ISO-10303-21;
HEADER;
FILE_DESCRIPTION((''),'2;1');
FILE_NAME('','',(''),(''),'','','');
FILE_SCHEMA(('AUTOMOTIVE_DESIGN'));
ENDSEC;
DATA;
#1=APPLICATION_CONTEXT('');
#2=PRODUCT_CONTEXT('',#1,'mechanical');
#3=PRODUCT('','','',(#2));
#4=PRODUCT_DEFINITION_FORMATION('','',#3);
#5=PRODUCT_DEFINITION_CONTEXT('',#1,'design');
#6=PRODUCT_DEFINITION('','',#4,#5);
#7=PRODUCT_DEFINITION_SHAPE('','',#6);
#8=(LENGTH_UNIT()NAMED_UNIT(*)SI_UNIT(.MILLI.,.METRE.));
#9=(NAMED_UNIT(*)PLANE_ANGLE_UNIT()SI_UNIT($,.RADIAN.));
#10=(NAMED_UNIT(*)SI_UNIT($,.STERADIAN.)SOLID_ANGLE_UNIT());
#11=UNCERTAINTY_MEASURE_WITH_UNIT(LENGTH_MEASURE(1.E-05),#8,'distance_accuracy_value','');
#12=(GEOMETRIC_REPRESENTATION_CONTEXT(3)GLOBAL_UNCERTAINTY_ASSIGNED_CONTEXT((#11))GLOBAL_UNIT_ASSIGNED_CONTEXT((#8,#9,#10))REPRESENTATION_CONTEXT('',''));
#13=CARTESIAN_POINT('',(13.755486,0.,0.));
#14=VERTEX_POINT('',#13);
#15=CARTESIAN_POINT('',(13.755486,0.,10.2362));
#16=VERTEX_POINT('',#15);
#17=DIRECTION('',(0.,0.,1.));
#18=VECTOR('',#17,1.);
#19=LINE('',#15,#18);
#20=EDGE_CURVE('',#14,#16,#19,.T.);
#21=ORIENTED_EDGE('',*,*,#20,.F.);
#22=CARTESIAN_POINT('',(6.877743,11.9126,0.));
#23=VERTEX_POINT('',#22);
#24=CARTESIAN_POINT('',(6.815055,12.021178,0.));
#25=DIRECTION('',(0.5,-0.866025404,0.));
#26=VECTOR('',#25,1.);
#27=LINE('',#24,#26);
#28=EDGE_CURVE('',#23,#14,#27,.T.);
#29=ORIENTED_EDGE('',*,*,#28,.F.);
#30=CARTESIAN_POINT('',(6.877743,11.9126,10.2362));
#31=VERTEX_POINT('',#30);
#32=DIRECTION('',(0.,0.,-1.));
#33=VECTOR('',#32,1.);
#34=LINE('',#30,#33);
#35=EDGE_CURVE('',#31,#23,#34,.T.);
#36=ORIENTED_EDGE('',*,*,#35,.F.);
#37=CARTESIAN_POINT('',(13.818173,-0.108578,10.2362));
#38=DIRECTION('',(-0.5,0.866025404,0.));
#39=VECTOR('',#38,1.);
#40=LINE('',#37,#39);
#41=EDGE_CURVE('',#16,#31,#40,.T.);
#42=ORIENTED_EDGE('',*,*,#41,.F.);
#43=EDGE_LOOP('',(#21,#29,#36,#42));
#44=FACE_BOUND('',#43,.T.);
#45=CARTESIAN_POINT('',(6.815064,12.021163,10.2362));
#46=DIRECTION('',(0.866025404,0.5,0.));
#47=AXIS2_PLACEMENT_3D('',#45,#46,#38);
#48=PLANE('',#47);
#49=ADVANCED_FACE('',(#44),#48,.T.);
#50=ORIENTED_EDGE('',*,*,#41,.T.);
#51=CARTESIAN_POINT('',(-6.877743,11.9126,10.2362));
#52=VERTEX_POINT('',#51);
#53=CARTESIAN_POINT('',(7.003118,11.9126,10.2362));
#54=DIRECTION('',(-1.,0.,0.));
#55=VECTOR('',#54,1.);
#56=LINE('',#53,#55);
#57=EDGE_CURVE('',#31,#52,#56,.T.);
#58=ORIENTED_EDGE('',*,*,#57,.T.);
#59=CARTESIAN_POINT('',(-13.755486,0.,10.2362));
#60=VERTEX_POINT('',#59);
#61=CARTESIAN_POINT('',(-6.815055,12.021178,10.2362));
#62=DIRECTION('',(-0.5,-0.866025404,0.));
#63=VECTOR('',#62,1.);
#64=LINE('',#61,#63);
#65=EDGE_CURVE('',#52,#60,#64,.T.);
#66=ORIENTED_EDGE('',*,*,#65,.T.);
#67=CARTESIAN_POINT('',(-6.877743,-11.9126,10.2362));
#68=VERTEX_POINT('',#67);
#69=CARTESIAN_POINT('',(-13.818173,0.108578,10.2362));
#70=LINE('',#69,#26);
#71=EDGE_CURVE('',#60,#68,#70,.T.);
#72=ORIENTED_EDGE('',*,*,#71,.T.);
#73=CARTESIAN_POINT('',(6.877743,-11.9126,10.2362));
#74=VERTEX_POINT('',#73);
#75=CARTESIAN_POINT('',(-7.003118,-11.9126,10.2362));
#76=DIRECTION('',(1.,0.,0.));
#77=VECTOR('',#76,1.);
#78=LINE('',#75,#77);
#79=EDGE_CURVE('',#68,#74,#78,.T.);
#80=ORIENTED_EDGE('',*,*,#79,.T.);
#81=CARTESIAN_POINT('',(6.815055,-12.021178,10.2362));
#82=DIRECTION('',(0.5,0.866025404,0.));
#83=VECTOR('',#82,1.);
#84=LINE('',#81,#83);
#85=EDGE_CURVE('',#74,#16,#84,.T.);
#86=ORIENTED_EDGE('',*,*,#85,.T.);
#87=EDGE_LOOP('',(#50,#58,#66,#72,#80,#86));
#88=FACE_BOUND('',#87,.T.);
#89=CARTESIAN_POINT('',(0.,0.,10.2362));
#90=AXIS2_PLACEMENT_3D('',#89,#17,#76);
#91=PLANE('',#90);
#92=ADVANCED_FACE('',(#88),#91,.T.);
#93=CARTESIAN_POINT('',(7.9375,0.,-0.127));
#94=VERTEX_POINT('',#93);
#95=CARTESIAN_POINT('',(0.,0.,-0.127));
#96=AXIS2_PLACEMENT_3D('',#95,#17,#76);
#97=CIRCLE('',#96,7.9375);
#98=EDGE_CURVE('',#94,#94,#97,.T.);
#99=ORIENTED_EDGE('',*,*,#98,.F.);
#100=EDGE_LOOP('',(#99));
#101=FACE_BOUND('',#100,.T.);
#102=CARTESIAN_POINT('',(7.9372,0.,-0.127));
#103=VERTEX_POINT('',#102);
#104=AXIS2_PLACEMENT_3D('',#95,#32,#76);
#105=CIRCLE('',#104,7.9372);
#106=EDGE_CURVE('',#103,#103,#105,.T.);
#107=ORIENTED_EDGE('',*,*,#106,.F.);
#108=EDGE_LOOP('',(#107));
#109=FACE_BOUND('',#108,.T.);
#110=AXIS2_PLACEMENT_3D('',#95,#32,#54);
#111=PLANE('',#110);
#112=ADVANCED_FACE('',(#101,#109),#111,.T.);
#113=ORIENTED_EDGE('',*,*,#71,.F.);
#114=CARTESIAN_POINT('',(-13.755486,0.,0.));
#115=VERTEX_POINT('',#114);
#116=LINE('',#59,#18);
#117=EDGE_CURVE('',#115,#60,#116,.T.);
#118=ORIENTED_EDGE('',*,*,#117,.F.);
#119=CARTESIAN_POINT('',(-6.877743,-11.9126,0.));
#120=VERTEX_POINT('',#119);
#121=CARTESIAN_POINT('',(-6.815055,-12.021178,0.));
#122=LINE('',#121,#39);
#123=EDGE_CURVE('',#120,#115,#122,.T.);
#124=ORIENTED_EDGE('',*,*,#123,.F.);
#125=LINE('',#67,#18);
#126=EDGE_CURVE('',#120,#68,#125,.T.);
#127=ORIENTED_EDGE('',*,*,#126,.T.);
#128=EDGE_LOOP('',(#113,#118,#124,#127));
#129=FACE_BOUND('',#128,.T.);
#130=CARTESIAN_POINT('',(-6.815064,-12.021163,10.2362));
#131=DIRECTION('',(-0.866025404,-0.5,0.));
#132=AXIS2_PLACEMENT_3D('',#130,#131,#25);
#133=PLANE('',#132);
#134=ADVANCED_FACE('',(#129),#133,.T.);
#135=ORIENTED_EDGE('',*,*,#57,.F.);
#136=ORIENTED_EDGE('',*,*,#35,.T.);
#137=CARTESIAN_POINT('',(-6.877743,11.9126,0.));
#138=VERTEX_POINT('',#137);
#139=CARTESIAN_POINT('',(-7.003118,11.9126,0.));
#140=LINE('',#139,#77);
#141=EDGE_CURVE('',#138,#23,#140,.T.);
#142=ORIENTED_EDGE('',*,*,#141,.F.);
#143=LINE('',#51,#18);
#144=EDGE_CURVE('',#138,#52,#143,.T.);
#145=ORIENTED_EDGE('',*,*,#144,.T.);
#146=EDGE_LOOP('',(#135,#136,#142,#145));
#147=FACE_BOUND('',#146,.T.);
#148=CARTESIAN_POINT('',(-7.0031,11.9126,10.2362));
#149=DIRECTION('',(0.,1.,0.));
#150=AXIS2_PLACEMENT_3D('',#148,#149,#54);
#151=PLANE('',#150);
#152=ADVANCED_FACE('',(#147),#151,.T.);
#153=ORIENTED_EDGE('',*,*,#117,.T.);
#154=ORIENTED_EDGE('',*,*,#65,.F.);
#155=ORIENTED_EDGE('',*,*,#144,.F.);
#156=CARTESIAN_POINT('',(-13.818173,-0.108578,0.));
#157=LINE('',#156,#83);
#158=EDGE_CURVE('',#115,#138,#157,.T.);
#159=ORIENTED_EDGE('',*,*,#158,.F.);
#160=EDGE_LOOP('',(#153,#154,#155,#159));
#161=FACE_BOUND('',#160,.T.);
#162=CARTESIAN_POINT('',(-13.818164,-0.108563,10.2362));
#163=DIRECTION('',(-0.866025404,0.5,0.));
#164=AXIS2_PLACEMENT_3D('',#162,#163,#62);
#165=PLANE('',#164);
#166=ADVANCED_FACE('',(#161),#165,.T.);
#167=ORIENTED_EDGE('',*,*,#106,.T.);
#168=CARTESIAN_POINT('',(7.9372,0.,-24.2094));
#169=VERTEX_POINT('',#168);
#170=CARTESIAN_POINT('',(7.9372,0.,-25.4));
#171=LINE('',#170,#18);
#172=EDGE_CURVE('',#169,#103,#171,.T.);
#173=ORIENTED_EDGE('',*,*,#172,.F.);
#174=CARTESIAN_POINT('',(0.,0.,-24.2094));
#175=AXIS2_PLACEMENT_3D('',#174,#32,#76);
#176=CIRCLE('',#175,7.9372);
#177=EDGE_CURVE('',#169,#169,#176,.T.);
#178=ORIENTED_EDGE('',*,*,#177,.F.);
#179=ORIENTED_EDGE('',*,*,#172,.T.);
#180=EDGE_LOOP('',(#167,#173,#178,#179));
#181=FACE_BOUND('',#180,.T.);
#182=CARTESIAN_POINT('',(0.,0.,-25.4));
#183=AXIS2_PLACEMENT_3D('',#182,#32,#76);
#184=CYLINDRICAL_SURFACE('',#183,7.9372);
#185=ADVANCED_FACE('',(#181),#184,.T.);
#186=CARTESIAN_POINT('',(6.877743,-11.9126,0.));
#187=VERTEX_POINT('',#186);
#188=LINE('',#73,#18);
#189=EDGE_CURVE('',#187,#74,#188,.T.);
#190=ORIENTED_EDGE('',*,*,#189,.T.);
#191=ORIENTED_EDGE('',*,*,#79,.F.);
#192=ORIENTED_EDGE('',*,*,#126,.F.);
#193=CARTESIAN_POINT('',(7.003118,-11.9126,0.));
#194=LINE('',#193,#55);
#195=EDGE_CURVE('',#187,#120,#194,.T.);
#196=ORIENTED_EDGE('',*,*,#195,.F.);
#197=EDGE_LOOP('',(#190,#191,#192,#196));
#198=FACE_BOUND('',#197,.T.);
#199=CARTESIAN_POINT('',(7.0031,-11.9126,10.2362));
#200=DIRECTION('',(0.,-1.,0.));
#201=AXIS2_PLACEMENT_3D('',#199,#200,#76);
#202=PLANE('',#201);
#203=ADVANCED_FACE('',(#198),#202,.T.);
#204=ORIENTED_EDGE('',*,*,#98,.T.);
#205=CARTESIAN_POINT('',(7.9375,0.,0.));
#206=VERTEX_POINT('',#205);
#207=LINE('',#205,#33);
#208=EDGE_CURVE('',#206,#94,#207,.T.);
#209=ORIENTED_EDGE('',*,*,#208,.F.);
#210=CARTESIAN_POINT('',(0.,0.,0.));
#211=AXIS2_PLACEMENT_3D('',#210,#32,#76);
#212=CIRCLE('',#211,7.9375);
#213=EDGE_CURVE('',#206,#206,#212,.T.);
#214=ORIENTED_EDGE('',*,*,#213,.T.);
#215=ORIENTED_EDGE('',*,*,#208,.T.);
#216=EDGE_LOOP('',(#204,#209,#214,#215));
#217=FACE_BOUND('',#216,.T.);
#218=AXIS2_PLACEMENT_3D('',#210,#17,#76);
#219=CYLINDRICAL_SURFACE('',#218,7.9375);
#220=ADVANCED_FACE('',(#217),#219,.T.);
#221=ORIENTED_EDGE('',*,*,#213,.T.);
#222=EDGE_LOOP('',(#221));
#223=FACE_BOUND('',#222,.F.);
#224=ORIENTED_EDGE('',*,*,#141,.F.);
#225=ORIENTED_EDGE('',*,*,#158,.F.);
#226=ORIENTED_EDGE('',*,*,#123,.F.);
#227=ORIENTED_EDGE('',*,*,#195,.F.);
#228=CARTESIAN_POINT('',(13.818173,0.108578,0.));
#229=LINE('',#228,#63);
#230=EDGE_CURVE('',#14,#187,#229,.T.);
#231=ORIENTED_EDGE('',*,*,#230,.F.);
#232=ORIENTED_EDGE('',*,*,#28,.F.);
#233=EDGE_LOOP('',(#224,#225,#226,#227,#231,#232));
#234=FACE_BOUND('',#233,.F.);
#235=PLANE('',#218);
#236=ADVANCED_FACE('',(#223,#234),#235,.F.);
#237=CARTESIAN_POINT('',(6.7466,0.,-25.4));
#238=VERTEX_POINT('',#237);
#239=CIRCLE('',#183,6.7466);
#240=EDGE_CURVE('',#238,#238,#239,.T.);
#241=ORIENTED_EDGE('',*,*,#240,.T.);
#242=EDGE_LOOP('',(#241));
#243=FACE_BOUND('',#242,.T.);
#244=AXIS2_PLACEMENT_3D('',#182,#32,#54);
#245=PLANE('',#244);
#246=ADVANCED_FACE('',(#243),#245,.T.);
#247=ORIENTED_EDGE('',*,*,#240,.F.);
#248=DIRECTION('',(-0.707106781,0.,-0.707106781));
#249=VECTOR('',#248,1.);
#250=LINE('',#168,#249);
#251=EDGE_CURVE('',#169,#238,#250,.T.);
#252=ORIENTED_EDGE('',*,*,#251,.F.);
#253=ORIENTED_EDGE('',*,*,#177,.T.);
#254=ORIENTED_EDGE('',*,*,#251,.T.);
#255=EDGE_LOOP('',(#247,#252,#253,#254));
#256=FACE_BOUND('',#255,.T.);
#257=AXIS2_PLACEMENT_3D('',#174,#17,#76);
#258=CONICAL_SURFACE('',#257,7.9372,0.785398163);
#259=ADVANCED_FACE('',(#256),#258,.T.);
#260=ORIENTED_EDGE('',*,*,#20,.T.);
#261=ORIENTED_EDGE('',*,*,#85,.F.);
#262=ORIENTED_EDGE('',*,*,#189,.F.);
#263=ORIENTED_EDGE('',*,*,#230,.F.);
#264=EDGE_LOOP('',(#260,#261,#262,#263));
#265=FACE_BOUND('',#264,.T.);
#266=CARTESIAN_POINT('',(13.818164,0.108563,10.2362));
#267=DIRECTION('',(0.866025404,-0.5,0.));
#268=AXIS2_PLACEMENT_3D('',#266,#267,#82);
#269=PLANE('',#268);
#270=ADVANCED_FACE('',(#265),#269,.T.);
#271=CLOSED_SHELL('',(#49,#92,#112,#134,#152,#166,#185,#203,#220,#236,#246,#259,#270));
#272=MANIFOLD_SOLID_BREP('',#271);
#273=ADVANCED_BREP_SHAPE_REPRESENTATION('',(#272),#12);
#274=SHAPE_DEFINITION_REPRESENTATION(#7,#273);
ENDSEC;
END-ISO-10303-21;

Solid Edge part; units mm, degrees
sketch "Sketch1" plane through (0, 0, 0) normal (0, 0, 1) x (1, 0, 0)
  circle A0 centre (0, 0) radius 13.8186
  dimension "D1" = 27.6372
extrude "Protrusion1" add sketch "Sketch1" along normal blind 10.2362
sketch "Sketch2" plane through (0, 0, 0) normal (0, 0, -1) x (1, 0, 0)
  circle A0 centre (0, 0) radius 7.9375
extrude "Protrusion2" add sketch "Sketch2" along normal blind 25.4
sketch "Sketch3" plane through (0, 0, -25.4) normal (0, 0, -1) x (1, 0, 0)
  circle A0 centre (0, 0) radius 7.9372
extrude "Cutout1" cut sketch "Sketch3" against normal blind 25.273 flip side to cut
chamfer "Chamfer_1" distance 1.1906 angle 45 1 edges at (-7.9372, 0, -25.4)
sketch "Sketch4" plane through (0, 0, 10.2362) normal (0, 0, 1) x (1, 0, 0)
  line L0 (-7.0031, 11.9126) -> (7.0031, 11.9126)
  dimension "D1" = 23.8252
extrude "Cutout2" cut sketch "Sketch4" against normal up to next material side at (0, 11.9626, 10.2362)
pattern_circular "Pattern1" count 6 over 360 about axis through (0, 0, 10.2362) along (0, 0, 1) of "Cutout2"
properties part number "117670"
